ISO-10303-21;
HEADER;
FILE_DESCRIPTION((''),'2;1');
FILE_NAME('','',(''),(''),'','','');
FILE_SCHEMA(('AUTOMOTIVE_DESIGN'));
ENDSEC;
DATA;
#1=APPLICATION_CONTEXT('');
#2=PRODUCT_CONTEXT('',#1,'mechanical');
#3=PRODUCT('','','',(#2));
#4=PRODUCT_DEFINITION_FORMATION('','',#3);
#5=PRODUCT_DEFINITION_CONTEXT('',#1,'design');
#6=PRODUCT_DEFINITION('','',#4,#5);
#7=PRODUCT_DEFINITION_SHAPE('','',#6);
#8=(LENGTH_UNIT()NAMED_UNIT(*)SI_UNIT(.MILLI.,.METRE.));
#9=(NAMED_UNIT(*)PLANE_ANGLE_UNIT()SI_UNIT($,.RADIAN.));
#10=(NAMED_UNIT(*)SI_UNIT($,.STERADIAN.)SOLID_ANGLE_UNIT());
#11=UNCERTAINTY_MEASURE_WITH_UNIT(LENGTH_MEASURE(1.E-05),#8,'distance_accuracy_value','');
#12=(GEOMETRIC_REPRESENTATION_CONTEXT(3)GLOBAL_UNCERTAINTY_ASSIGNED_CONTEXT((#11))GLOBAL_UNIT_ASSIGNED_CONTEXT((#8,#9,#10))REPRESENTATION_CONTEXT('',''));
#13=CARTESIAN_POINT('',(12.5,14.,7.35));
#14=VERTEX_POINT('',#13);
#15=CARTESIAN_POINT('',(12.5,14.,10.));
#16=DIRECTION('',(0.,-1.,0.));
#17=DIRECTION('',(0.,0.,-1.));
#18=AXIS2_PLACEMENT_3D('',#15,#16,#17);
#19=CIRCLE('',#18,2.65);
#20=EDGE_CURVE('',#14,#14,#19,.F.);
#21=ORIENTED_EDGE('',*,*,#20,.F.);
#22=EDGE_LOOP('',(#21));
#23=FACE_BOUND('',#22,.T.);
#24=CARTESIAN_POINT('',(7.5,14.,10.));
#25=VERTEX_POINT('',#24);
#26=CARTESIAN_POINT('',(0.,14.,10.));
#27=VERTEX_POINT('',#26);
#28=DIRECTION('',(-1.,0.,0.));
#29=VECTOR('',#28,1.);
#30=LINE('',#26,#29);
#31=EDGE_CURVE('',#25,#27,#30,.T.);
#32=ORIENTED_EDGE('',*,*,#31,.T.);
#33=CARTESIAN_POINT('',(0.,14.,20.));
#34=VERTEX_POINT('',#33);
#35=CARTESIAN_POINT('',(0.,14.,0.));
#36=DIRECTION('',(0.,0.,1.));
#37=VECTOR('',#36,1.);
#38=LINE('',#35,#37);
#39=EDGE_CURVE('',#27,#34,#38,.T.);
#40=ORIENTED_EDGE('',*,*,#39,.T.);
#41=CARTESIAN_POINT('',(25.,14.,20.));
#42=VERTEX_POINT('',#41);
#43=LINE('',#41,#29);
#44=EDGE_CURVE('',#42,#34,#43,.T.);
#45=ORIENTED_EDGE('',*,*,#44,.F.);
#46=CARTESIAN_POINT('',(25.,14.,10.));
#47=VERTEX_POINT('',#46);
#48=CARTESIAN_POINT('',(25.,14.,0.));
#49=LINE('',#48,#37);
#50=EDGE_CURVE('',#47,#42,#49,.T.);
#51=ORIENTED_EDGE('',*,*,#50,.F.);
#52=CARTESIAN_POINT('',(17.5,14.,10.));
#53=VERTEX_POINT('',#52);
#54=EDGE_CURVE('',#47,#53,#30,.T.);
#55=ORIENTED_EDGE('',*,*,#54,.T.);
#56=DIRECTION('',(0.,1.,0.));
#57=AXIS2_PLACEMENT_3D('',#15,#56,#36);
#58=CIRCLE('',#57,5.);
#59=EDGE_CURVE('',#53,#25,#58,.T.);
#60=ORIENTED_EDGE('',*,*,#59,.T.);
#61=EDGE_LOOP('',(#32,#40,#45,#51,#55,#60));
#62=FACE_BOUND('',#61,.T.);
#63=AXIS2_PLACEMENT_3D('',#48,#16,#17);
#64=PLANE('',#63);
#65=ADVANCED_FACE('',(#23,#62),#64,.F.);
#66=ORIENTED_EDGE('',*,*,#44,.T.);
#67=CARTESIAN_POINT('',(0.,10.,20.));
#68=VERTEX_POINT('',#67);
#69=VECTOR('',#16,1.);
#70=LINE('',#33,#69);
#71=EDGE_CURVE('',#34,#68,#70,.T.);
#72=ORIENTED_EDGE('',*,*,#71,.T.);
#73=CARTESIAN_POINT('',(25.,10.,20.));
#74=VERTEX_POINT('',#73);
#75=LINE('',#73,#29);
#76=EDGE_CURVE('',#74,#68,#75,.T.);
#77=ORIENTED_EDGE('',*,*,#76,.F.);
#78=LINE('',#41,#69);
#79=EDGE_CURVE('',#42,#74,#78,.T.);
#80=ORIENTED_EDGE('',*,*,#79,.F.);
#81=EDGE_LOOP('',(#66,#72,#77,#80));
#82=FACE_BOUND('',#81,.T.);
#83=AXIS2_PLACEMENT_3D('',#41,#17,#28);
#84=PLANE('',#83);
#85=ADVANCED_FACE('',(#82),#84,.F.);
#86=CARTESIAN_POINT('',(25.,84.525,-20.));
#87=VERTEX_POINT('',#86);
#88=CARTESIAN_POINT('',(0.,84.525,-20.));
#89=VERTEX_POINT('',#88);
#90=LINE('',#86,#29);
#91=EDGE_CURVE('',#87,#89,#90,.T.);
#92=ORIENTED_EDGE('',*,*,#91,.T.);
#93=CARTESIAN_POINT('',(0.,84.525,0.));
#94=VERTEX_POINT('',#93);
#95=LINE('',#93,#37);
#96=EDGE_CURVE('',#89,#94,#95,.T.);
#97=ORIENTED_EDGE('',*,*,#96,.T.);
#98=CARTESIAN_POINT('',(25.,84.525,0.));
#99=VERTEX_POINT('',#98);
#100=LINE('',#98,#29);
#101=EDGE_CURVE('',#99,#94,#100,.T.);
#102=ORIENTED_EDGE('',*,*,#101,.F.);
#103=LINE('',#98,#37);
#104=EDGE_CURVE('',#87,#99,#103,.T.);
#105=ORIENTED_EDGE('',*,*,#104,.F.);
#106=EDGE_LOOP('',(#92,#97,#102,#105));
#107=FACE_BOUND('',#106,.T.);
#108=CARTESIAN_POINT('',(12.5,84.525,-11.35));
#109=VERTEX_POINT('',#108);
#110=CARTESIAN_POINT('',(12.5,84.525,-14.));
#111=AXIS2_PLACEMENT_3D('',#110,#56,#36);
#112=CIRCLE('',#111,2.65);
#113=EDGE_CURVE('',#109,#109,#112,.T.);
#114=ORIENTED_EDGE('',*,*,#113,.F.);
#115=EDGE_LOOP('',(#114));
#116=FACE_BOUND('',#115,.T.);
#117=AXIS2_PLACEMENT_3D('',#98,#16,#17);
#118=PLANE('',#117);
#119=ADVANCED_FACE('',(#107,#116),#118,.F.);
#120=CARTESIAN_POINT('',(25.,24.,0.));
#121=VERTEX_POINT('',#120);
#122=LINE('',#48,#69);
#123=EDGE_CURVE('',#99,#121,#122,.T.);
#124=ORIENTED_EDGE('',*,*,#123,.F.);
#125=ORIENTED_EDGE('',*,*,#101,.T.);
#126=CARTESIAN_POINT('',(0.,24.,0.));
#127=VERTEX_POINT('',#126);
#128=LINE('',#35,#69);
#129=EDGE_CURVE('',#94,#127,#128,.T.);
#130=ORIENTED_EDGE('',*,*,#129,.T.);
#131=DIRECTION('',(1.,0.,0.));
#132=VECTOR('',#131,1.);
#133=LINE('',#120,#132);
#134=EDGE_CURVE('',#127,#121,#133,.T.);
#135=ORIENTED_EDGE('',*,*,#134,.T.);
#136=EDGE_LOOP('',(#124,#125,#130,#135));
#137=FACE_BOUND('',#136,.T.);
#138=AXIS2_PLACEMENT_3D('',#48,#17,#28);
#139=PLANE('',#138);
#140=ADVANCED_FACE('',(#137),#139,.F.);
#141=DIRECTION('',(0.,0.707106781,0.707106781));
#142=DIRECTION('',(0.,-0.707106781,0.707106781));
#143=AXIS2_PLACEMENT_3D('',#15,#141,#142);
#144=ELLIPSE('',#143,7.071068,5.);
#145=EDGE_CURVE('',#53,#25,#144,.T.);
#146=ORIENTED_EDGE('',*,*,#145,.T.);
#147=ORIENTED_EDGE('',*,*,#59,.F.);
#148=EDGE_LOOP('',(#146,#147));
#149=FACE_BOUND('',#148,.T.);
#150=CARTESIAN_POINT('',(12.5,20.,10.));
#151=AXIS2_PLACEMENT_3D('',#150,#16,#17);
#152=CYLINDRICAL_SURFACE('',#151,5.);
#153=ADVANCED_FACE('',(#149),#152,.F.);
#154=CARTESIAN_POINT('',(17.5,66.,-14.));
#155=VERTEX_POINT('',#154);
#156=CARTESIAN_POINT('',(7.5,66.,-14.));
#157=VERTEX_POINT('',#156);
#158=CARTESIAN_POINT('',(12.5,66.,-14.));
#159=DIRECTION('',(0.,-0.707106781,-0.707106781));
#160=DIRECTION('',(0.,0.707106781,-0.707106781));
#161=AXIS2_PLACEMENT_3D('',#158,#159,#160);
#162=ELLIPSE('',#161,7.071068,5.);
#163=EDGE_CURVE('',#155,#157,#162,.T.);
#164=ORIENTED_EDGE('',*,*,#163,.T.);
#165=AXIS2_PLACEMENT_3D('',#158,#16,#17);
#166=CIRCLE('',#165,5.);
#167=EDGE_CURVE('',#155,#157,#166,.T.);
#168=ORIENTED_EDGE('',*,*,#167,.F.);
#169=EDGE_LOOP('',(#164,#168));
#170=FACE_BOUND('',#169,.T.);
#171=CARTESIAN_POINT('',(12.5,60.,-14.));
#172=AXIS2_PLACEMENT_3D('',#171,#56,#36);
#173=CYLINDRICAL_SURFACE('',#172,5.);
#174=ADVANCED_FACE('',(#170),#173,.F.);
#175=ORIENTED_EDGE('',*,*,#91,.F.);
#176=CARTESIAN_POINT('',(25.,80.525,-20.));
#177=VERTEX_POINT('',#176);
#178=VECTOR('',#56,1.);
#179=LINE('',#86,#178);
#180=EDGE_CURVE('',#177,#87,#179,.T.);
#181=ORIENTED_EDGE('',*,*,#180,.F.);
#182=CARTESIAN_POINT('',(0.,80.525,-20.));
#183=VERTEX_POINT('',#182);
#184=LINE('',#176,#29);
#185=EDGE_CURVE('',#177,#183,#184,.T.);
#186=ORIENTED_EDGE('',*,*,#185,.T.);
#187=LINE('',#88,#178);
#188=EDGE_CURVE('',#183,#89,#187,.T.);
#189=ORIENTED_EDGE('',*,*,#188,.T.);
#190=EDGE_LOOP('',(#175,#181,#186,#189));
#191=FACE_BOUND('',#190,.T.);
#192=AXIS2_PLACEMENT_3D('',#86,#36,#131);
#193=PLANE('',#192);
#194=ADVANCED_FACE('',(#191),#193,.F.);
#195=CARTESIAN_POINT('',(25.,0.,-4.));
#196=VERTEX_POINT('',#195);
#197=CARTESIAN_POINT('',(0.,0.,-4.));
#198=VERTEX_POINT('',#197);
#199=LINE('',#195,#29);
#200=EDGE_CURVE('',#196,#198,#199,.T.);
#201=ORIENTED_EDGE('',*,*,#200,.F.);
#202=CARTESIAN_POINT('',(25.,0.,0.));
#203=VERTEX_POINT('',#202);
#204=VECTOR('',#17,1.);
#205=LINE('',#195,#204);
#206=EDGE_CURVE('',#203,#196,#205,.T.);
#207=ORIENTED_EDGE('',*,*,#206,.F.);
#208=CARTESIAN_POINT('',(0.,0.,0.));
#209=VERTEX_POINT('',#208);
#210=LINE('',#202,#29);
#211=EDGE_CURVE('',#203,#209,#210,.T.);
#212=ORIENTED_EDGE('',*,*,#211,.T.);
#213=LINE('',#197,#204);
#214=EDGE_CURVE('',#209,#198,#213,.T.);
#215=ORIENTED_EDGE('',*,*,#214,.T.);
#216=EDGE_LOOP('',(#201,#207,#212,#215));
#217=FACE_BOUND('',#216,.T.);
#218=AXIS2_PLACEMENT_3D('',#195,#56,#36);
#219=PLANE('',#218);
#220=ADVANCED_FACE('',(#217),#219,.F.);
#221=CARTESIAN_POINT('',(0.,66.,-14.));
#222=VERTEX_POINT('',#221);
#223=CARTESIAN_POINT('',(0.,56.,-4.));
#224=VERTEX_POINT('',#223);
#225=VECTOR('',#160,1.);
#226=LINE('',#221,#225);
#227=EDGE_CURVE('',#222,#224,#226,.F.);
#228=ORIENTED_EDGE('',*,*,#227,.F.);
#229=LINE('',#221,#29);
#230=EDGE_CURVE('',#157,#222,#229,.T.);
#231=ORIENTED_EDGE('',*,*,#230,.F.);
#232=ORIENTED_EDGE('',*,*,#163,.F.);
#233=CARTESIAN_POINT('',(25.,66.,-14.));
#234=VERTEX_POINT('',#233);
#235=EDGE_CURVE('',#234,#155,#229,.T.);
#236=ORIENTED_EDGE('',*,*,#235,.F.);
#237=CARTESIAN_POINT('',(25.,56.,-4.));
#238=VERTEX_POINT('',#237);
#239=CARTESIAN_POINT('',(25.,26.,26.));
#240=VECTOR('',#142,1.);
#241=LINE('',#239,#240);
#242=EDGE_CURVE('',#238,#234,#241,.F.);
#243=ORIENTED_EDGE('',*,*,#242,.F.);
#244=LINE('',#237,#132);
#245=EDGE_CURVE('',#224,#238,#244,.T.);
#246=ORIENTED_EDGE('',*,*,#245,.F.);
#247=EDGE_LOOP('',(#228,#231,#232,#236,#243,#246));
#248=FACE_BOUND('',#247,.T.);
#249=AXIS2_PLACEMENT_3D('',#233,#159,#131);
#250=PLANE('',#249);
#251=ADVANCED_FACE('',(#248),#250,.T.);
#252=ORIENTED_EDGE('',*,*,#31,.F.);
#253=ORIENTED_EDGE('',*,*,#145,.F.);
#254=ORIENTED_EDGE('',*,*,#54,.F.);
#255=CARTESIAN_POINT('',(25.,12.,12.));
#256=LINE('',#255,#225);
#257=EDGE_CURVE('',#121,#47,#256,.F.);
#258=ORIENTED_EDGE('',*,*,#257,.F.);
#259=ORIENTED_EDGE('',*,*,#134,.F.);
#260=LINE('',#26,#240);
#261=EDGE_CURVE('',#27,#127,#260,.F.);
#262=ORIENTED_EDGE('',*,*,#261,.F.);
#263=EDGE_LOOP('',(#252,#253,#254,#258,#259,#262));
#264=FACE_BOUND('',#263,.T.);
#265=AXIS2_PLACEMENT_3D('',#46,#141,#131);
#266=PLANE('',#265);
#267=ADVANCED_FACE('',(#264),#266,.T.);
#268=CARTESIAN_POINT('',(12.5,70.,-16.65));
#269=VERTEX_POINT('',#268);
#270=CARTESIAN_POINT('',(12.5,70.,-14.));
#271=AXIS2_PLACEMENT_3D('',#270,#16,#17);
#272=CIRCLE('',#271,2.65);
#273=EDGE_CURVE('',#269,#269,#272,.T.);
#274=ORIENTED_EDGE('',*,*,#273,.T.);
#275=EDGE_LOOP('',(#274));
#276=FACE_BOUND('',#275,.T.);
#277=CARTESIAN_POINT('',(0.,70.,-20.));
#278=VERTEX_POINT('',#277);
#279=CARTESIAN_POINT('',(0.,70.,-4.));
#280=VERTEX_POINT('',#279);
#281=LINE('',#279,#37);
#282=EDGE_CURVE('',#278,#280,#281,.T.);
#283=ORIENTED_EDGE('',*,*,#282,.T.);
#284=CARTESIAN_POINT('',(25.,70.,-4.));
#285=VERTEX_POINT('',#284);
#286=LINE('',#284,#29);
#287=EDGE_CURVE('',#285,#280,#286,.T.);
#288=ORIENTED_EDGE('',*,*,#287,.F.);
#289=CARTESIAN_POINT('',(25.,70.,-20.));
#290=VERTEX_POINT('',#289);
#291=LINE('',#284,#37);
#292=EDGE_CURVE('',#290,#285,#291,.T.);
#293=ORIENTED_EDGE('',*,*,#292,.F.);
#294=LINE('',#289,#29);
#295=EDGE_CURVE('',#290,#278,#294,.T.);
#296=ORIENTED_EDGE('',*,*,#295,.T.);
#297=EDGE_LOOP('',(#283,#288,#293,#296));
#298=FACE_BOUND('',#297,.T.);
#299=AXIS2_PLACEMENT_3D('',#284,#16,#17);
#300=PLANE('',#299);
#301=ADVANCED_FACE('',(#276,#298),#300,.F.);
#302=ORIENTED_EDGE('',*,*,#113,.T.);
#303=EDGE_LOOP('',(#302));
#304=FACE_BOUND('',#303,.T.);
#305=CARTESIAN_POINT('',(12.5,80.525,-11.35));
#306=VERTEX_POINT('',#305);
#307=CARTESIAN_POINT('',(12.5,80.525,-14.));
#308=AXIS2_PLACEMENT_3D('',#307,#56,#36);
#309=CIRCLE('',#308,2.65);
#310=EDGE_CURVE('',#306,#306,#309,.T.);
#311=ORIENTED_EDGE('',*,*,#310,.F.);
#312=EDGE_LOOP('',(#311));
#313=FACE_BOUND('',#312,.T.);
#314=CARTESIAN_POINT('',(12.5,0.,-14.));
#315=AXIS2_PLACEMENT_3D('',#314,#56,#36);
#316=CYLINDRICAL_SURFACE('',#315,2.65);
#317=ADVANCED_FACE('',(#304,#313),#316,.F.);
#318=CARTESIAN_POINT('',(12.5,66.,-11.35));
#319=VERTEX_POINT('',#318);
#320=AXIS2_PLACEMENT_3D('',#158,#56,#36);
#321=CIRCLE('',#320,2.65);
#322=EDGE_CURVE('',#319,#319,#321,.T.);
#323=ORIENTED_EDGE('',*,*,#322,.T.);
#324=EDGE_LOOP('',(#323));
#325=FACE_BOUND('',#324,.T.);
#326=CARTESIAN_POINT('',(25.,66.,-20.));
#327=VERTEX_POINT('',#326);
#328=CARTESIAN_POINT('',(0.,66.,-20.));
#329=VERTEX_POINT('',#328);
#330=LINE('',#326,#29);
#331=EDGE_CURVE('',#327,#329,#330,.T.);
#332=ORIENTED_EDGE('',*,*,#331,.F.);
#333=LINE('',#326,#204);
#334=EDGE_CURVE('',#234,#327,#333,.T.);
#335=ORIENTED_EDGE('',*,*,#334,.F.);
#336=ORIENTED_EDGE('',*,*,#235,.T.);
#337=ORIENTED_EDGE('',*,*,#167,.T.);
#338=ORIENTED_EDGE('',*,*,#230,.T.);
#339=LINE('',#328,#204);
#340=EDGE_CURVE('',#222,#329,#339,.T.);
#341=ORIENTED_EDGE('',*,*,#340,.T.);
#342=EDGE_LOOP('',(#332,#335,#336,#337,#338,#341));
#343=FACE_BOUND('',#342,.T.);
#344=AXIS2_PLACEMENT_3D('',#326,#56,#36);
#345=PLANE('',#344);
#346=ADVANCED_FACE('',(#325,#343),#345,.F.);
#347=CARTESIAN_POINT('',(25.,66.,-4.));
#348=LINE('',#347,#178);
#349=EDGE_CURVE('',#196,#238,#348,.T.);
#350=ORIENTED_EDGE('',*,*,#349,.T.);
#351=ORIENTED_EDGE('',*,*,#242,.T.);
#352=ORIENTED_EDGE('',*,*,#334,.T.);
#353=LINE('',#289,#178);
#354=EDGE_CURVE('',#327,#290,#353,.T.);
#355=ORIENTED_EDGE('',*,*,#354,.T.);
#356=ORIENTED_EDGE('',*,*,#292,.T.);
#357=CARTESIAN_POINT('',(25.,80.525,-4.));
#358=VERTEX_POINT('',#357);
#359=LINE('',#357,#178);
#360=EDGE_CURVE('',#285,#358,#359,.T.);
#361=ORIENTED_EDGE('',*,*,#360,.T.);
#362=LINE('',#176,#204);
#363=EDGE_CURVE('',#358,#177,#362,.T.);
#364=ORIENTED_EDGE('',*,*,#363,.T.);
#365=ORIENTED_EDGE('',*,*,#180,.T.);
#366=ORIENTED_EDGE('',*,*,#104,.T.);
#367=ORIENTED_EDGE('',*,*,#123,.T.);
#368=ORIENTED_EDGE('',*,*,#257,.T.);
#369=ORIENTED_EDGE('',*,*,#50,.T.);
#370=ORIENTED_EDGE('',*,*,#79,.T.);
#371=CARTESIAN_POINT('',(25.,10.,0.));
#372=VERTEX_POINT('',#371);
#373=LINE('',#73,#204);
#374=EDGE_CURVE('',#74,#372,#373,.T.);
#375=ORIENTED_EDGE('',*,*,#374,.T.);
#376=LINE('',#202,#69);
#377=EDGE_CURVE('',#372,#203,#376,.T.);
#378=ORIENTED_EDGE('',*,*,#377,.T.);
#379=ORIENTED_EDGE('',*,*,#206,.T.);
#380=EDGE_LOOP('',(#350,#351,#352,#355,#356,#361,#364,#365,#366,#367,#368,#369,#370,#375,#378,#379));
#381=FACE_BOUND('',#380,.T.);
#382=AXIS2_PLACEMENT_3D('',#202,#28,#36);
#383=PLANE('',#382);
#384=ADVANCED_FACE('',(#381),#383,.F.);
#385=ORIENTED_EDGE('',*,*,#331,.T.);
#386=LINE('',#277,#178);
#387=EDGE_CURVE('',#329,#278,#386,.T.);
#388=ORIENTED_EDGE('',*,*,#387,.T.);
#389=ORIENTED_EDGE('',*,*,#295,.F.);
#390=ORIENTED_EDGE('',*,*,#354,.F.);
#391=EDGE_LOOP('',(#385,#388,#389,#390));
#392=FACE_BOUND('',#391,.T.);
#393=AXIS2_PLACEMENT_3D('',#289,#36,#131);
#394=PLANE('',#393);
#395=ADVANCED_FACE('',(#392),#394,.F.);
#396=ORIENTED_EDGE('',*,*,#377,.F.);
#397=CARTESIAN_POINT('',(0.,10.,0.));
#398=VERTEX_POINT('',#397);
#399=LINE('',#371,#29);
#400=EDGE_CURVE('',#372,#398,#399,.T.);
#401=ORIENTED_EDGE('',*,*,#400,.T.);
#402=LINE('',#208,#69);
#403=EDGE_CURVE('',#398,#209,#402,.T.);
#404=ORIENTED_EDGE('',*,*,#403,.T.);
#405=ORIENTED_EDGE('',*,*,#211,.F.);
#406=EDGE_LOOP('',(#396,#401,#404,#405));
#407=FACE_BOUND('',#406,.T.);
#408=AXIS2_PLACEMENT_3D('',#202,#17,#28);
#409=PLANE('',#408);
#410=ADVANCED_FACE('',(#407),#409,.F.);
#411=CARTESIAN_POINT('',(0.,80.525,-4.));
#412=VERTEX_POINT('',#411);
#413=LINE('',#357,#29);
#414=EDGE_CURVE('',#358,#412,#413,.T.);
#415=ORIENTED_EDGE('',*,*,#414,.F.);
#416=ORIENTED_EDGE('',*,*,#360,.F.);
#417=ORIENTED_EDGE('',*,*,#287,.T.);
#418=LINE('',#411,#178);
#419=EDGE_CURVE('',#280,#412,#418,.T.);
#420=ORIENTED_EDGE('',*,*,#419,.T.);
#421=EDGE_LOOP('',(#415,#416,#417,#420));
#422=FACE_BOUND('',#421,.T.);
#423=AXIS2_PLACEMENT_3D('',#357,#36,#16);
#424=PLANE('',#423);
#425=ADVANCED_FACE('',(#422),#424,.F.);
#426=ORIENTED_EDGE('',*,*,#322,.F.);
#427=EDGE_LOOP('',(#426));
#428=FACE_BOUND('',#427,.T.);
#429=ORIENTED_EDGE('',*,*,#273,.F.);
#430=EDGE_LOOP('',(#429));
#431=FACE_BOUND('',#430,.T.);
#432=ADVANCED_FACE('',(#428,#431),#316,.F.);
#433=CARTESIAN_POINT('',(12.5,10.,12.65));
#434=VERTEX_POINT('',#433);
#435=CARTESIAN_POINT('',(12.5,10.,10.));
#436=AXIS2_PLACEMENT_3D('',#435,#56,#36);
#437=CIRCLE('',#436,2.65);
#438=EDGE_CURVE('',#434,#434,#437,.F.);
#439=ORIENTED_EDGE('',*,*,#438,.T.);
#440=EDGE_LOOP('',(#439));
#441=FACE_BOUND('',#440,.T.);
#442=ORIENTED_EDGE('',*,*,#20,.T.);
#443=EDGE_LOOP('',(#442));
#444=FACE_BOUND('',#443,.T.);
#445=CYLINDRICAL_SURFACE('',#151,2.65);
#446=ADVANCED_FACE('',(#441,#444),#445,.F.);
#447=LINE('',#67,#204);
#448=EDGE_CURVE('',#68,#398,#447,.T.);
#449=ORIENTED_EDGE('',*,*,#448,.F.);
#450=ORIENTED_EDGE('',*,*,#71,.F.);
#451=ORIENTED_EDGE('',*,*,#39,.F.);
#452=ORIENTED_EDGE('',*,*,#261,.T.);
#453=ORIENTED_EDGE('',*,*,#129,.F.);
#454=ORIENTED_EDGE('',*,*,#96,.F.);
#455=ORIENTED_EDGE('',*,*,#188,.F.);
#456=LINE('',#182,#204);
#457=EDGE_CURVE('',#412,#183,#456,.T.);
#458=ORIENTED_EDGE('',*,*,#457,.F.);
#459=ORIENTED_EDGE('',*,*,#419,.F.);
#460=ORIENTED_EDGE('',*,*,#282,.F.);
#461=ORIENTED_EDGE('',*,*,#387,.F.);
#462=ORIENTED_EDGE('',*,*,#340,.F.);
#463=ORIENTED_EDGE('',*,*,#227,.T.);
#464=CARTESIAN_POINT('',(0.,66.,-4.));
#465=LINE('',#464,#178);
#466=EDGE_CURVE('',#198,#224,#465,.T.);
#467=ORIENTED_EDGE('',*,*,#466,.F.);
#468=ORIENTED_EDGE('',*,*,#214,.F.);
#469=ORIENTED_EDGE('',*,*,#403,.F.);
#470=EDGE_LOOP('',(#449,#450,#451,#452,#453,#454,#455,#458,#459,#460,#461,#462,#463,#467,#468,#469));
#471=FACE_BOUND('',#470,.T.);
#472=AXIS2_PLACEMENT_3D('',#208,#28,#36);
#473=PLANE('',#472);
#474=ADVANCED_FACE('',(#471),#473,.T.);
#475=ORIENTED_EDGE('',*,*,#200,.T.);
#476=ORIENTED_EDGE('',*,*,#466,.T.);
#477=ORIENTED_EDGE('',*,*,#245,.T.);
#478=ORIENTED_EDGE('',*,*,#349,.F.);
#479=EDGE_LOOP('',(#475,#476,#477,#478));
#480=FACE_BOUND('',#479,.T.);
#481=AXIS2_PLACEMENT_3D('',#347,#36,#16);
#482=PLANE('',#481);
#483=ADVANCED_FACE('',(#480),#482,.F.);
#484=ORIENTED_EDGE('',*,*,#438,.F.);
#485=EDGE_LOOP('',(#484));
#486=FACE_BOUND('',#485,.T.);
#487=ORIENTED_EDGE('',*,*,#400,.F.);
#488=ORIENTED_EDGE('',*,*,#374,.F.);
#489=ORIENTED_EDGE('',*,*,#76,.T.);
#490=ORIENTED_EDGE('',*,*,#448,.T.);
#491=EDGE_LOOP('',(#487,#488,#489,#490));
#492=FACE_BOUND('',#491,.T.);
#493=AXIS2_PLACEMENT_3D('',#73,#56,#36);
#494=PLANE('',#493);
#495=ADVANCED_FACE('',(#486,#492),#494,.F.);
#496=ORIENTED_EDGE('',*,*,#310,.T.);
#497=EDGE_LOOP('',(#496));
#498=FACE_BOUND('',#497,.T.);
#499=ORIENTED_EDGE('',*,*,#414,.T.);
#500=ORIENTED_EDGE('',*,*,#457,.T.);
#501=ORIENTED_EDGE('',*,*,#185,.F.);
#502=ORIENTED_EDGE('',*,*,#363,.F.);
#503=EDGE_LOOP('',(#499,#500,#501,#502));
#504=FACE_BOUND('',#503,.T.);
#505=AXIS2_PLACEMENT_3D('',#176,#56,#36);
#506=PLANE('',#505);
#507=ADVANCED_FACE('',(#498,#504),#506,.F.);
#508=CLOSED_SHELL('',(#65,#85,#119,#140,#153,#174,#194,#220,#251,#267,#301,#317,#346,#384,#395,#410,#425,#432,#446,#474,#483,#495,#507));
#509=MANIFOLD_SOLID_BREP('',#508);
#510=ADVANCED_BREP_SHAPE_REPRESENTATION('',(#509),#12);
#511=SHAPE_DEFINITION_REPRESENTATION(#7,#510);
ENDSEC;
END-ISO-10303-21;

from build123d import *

# Parameters (mm, degrees)
BOSS_EXTRUDE1_DEPTH     = 25
CUT_EXTRUDE1_DEPTH      = 6
CUT_EXTRUDE1_DEPTH_BACK = 6
SKETCH2_R               = 2.65
SKETCH3_R               = 2.65
CUT_EXTRUDE2_DEPTH      = 91.385151574
CHAMFER1_SIZE           = 10
SKETCH4_R               = 5
CUT_EXTRUDE4_DEPTH      = 6
CHAMFER2_SIZE           = 10
SKETCH5_R               = 5
CUT_EXTRUDE5_DEPTH      = 6


with BuildPart() as part:
    # Sketch1 → Boss-Extrude1 (new body)
    with BuildSketch(Plane(origin=(0, 0, 0), x_dir=(0, 0, -1), z_dir=(1, 0, 0))):
        Polygon((0, 0), (0, 10), (-20, 10), (-20, 14), (0, 14), (0, 84.525), (20, 84.525), (20, 80.525), (4, 80.525), (4, 70), (20, 70), (20, 66), (4, 66), (4, 0), align=None)
    extrude(amount=BOSS_EXTRUDE1_DEPTH)

    # Sketch2 → Cut-Extrude1 (cut, two sides: drawn at the far end of the back side and taken through both)
    with BuildSketch(Plane(origin=(0, 14, 0), x_dir=(1, 0, 0), z_dir=(0, 1, 0)).offset(-CUT_EXTRUDE1_DEPTH_BACK)):
        with Locations(Location((12.5, -10, 0), (0, 0, 90))):
            Circle(SKETCH2_R)
    extrude(amount=CUT_EXTRUDE1_DEPTH + CUT_EXTRUDE1_DEPTH_BACK, mode=Mode.SUBTRACT)

    # Sketch3 → Cut-Extrude2 (cut, through all)
    with BuildSketch(Plane(origin=(0, 84.525, 0), x_dir=(1, 0, 0), z_dir=(0, 1, 0))):
        with Locations(Location((12.5, 14, 0), (0, 0, 270))):
            Circle(SKETCH3_R)
    extrude(amount=-CUT_EXTRUDE2_DEPTH, mode=Mode.SUBTRACT)

    # Chamfer1
    # the kernel refuses this chamfer: 10 mm, written as the material it adds along each edge
    with BuildSketch(Plane(origin=(0, 14, 0), x_dir=(0, -0.027495876610586317, 0.9996219169112968), z_dir=(1, 0, 0))) as chamfer1_piece_1_section:
        Polygon((CHAMFER1_SIZE * 0.999621916911, -CHAMFER1_SIZE * 0.0274958766106), (-CHAMFER1_SIZE * 0.0274958766106, -CHAMFER1_SIZE * 0.999621916911), (0, 0), align=None)
    chamfer1_piece_1 = extrude(amount=25, mode=Mode.PRIVATE)
    chamfer1_piece_1 = chamfer1_piece_1 - Plane(origin=(12.5, 17.333000487, 10), x_dir=(0, 0, -1), z_dir=(0, 1, 0)) * Cylinder(2.65, 90, mode=Mode.PRIVATE)
    add(chamfer1_piece_1)

    # Sketch4 → Cut-Extrude4 (cut)
    with BuildSketch(Plane(origin=(0, 14, 0), x_dir=(1, 0, 0), z_dir=(0, 1, 0))):
        with Locations((12.5, -10)):
            Circle(SKETCH4_R)
    extrude(amount=CUT_EXTRUDE4_DEPTH, mode=Mode.SUBTRACT)

    # Chamfer2
    # the kernel refuses this chamfer: 10 mm, written as the material it adds along each edge
    with BuildSketch(Plane(origin=(0, 66, -4), x_dir=(0, -0.9996219169112968, 0.027495876610586233), z_dir=(1, 0, 0))) as chamfer2_piece_1_section:
        Polygon((CHAMFER2_SIZE * 0.999621916911, CHAMFER2_SIZE * 0.0274958766106), (-CHAMFER2_SIZE * 0.0274958766106, CHAMFER2_SIZE * 0.999621916911), (0, 0), align=None)
    chamfer2_piece_1 = extrude(amount=25, mode=Mode.PRIVATE)
    chamfer2_piece_1 = chamfer2_piece_1 - Plane(origin=(12.5, 62.667000224, -14), x_dir=(0, 0, 1), z_dir=(0, 1, 0)) * Cylinder(2.65, 90, mode=Mode.PRIVATE)
    add(chamfer2_piece_1)

    # Sketch5 → Cut-Extrude5 (cut)
    with BuildSketch(Plane.XZ.offset(-66)):
        with Locations((12.5, -14)):
            Circle(SKETCH5_R)
    extrude(amount=CUT_EXTRUDE5_DEPTH, mode=Mode.SUBTRACT)


solid = part.part
